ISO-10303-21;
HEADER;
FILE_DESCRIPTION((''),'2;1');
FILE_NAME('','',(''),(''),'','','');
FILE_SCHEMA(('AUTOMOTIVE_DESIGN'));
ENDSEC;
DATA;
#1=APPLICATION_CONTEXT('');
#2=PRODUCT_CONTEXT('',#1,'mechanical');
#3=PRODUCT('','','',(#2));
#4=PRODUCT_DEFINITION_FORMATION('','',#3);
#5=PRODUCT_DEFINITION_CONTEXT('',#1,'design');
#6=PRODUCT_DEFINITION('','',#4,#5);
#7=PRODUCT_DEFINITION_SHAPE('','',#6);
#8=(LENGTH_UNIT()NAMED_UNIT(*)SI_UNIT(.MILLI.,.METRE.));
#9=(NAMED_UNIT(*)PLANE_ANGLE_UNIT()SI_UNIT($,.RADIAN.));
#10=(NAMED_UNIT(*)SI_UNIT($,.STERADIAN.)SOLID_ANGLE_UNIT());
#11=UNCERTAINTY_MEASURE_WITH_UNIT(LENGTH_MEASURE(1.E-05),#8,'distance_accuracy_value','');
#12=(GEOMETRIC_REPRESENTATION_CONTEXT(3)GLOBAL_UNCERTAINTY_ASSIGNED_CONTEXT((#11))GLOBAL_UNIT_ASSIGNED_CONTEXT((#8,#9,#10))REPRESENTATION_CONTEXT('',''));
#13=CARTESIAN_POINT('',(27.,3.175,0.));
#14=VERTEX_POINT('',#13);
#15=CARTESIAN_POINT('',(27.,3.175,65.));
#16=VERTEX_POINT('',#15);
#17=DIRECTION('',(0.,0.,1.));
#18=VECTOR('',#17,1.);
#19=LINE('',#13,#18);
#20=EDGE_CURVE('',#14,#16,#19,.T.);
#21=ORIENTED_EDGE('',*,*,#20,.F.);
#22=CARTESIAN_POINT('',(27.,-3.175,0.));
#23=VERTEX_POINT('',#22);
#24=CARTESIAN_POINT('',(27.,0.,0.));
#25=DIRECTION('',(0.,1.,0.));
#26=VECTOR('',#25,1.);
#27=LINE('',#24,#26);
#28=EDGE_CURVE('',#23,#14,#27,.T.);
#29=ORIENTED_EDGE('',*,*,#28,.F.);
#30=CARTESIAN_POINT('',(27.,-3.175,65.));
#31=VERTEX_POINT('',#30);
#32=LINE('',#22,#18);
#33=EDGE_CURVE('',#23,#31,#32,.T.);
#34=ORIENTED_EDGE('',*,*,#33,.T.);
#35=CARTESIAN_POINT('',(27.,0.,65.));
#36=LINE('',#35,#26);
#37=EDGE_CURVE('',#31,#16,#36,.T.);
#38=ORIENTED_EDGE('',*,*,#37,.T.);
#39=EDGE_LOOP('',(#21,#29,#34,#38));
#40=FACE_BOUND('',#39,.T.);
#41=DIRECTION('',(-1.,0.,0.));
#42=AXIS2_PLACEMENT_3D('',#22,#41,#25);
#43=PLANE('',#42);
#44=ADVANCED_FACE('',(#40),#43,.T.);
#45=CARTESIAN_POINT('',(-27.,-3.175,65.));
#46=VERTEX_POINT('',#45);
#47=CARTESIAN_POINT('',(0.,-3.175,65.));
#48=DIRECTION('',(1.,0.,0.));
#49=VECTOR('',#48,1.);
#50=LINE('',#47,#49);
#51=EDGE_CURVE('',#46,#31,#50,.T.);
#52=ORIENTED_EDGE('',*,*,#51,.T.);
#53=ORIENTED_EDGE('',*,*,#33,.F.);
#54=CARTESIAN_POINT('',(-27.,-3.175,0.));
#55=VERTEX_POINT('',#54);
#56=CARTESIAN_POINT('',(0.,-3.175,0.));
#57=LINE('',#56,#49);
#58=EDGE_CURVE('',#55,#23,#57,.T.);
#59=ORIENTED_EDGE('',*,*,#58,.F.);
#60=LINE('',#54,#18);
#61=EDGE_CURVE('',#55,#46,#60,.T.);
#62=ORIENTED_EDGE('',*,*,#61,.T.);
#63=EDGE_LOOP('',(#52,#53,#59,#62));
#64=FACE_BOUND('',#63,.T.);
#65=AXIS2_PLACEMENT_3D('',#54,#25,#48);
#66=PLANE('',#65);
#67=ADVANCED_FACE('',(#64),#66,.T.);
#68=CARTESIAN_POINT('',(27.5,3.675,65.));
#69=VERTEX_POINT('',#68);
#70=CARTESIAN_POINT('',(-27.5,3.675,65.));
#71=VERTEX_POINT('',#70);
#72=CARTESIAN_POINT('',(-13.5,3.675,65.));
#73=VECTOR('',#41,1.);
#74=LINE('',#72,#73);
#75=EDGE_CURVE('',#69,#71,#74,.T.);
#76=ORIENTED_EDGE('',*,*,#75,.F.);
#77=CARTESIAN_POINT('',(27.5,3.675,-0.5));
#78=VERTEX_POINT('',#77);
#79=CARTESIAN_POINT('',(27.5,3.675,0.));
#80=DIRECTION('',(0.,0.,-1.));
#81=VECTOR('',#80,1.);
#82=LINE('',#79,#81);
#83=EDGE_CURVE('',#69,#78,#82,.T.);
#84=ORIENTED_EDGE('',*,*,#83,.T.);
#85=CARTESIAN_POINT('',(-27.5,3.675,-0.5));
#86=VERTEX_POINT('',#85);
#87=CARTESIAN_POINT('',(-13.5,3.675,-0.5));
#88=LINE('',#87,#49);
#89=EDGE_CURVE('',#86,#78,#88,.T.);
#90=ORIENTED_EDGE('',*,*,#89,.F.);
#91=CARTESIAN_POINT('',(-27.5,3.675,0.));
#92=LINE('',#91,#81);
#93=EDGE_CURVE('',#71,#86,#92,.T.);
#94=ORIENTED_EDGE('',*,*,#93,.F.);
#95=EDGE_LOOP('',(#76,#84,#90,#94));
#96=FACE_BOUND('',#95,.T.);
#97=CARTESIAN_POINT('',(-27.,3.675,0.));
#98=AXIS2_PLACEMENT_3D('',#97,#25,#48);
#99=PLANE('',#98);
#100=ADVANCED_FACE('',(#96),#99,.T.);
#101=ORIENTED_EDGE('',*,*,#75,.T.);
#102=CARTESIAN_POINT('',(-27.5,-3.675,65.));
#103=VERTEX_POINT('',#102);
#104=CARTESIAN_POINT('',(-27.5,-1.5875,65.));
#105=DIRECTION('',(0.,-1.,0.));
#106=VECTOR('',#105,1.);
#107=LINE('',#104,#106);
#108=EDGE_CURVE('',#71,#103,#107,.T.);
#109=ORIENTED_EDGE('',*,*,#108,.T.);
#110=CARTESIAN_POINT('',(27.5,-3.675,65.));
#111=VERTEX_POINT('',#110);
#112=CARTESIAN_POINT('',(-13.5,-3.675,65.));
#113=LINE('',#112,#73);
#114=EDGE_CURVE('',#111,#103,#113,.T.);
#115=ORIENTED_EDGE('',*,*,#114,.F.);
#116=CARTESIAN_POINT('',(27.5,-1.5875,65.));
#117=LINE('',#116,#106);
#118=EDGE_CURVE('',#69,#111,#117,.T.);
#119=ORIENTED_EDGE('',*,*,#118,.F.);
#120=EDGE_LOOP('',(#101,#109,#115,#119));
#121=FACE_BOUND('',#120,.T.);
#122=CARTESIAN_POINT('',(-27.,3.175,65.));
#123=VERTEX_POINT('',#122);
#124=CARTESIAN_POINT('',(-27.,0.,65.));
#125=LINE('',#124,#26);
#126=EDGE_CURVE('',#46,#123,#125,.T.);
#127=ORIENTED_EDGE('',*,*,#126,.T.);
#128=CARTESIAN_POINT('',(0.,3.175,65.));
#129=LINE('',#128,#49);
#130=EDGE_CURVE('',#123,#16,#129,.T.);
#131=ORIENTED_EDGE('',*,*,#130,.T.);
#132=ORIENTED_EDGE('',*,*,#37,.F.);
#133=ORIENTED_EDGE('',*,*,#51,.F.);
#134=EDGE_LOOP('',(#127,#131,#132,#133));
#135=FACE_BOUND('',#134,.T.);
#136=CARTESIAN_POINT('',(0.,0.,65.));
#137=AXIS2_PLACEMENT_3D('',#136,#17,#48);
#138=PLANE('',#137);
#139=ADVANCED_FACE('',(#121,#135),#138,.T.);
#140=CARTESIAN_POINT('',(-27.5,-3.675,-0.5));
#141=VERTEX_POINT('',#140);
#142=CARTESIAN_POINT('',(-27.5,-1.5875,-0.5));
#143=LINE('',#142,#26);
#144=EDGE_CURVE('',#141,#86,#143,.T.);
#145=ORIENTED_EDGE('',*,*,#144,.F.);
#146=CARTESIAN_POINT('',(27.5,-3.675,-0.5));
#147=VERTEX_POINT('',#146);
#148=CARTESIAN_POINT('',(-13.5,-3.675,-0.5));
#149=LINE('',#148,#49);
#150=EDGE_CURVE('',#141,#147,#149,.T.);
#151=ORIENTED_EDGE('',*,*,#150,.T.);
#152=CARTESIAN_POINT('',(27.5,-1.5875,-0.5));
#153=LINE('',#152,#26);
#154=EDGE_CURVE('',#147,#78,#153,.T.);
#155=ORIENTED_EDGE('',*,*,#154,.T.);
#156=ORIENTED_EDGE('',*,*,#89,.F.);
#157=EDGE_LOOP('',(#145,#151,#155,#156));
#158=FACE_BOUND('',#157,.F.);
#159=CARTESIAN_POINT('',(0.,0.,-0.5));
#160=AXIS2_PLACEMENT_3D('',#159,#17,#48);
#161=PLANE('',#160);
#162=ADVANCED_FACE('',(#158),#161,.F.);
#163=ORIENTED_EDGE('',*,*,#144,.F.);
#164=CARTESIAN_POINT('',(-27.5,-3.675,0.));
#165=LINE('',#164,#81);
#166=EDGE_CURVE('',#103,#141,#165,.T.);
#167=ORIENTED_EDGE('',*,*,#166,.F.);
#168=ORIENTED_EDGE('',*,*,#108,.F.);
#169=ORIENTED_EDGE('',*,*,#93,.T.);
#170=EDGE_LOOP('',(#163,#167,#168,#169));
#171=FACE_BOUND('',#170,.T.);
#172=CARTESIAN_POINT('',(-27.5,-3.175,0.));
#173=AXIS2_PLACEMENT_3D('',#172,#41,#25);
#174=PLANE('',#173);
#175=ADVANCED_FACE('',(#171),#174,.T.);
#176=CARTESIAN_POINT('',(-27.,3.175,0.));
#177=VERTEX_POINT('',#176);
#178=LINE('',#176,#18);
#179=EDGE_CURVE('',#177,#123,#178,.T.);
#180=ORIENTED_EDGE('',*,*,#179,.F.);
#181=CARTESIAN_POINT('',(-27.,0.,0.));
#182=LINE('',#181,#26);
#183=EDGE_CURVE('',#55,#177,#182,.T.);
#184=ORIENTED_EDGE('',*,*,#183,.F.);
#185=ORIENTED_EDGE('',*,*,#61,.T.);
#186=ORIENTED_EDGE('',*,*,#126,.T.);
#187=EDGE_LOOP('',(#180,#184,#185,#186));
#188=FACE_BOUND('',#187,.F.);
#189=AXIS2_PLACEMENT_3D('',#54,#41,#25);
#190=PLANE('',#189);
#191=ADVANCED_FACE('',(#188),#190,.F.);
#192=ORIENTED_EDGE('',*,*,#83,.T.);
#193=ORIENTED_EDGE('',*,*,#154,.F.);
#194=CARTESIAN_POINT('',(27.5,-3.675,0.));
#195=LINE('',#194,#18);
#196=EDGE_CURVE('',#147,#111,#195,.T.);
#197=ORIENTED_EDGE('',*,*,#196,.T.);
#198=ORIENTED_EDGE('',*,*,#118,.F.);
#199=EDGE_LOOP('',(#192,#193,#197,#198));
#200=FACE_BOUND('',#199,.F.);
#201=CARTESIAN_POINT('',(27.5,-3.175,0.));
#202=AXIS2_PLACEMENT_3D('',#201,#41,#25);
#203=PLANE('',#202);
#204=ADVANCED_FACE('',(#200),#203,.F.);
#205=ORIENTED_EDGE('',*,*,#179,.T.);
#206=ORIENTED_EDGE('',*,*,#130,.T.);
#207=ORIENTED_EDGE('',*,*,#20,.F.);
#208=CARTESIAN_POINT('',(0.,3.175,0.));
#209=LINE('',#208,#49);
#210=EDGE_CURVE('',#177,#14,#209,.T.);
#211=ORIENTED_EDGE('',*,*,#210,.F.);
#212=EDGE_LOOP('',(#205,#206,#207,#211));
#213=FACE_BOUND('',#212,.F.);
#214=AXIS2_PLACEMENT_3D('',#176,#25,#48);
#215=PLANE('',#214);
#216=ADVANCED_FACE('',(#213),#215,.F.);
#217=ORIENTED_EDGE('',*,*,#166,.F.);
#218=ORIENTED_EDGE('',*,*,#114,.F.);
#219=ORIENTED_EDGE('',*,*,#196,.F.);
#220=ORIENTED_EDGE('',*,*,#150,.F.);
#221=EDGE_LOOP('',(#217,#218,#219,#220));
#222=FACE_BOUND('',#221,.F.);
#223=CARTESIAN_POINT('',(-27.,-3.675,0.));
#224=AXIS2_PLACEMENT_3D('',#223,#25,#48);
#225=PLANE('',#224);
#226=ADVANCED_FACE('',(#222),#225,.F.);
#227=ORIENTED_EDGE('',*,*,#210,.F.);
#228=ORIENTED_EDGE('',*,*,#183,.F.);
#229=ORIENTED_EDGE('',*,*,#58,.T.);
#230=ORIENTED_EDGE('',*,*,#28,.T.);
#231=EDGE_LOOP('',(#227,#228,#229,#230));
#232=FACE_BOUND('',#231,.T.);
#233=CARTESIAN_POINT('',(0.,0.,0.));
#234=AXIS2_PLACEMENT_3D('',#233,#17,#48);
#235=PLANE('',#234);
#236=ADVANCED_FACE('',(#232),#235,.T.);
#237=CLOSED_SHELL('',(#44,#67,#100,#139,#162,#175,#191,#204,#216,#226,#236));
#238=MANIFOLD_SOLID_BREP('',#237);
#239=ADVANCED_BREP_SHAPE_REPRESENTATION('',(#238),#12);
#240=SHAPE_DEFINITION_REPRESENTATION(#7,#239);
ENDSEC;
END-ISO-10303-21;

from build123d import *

# Parameters (mm, degrees)
F0_W     = 54
F0_H     = 6.35
F1_DEPTH = 65
F2_T     = 0.5


with BuildPart() as f1:
    # F0 (on Top) → F1 (new body)
    with BuildSketch(Plane.XY):
        Rectangle(F0_W, F0_H)
    extrude(amount=F1_DEPTH)

    # F2
    f2_openings = [f1.faces().sort_by_distance(p)[0] for p in [
        (0, 0, 65),
    ]]
    offset(amount=F2_T, openings=f2_openings, kind=Kind.INTERSECTION)


solid = f1.part
